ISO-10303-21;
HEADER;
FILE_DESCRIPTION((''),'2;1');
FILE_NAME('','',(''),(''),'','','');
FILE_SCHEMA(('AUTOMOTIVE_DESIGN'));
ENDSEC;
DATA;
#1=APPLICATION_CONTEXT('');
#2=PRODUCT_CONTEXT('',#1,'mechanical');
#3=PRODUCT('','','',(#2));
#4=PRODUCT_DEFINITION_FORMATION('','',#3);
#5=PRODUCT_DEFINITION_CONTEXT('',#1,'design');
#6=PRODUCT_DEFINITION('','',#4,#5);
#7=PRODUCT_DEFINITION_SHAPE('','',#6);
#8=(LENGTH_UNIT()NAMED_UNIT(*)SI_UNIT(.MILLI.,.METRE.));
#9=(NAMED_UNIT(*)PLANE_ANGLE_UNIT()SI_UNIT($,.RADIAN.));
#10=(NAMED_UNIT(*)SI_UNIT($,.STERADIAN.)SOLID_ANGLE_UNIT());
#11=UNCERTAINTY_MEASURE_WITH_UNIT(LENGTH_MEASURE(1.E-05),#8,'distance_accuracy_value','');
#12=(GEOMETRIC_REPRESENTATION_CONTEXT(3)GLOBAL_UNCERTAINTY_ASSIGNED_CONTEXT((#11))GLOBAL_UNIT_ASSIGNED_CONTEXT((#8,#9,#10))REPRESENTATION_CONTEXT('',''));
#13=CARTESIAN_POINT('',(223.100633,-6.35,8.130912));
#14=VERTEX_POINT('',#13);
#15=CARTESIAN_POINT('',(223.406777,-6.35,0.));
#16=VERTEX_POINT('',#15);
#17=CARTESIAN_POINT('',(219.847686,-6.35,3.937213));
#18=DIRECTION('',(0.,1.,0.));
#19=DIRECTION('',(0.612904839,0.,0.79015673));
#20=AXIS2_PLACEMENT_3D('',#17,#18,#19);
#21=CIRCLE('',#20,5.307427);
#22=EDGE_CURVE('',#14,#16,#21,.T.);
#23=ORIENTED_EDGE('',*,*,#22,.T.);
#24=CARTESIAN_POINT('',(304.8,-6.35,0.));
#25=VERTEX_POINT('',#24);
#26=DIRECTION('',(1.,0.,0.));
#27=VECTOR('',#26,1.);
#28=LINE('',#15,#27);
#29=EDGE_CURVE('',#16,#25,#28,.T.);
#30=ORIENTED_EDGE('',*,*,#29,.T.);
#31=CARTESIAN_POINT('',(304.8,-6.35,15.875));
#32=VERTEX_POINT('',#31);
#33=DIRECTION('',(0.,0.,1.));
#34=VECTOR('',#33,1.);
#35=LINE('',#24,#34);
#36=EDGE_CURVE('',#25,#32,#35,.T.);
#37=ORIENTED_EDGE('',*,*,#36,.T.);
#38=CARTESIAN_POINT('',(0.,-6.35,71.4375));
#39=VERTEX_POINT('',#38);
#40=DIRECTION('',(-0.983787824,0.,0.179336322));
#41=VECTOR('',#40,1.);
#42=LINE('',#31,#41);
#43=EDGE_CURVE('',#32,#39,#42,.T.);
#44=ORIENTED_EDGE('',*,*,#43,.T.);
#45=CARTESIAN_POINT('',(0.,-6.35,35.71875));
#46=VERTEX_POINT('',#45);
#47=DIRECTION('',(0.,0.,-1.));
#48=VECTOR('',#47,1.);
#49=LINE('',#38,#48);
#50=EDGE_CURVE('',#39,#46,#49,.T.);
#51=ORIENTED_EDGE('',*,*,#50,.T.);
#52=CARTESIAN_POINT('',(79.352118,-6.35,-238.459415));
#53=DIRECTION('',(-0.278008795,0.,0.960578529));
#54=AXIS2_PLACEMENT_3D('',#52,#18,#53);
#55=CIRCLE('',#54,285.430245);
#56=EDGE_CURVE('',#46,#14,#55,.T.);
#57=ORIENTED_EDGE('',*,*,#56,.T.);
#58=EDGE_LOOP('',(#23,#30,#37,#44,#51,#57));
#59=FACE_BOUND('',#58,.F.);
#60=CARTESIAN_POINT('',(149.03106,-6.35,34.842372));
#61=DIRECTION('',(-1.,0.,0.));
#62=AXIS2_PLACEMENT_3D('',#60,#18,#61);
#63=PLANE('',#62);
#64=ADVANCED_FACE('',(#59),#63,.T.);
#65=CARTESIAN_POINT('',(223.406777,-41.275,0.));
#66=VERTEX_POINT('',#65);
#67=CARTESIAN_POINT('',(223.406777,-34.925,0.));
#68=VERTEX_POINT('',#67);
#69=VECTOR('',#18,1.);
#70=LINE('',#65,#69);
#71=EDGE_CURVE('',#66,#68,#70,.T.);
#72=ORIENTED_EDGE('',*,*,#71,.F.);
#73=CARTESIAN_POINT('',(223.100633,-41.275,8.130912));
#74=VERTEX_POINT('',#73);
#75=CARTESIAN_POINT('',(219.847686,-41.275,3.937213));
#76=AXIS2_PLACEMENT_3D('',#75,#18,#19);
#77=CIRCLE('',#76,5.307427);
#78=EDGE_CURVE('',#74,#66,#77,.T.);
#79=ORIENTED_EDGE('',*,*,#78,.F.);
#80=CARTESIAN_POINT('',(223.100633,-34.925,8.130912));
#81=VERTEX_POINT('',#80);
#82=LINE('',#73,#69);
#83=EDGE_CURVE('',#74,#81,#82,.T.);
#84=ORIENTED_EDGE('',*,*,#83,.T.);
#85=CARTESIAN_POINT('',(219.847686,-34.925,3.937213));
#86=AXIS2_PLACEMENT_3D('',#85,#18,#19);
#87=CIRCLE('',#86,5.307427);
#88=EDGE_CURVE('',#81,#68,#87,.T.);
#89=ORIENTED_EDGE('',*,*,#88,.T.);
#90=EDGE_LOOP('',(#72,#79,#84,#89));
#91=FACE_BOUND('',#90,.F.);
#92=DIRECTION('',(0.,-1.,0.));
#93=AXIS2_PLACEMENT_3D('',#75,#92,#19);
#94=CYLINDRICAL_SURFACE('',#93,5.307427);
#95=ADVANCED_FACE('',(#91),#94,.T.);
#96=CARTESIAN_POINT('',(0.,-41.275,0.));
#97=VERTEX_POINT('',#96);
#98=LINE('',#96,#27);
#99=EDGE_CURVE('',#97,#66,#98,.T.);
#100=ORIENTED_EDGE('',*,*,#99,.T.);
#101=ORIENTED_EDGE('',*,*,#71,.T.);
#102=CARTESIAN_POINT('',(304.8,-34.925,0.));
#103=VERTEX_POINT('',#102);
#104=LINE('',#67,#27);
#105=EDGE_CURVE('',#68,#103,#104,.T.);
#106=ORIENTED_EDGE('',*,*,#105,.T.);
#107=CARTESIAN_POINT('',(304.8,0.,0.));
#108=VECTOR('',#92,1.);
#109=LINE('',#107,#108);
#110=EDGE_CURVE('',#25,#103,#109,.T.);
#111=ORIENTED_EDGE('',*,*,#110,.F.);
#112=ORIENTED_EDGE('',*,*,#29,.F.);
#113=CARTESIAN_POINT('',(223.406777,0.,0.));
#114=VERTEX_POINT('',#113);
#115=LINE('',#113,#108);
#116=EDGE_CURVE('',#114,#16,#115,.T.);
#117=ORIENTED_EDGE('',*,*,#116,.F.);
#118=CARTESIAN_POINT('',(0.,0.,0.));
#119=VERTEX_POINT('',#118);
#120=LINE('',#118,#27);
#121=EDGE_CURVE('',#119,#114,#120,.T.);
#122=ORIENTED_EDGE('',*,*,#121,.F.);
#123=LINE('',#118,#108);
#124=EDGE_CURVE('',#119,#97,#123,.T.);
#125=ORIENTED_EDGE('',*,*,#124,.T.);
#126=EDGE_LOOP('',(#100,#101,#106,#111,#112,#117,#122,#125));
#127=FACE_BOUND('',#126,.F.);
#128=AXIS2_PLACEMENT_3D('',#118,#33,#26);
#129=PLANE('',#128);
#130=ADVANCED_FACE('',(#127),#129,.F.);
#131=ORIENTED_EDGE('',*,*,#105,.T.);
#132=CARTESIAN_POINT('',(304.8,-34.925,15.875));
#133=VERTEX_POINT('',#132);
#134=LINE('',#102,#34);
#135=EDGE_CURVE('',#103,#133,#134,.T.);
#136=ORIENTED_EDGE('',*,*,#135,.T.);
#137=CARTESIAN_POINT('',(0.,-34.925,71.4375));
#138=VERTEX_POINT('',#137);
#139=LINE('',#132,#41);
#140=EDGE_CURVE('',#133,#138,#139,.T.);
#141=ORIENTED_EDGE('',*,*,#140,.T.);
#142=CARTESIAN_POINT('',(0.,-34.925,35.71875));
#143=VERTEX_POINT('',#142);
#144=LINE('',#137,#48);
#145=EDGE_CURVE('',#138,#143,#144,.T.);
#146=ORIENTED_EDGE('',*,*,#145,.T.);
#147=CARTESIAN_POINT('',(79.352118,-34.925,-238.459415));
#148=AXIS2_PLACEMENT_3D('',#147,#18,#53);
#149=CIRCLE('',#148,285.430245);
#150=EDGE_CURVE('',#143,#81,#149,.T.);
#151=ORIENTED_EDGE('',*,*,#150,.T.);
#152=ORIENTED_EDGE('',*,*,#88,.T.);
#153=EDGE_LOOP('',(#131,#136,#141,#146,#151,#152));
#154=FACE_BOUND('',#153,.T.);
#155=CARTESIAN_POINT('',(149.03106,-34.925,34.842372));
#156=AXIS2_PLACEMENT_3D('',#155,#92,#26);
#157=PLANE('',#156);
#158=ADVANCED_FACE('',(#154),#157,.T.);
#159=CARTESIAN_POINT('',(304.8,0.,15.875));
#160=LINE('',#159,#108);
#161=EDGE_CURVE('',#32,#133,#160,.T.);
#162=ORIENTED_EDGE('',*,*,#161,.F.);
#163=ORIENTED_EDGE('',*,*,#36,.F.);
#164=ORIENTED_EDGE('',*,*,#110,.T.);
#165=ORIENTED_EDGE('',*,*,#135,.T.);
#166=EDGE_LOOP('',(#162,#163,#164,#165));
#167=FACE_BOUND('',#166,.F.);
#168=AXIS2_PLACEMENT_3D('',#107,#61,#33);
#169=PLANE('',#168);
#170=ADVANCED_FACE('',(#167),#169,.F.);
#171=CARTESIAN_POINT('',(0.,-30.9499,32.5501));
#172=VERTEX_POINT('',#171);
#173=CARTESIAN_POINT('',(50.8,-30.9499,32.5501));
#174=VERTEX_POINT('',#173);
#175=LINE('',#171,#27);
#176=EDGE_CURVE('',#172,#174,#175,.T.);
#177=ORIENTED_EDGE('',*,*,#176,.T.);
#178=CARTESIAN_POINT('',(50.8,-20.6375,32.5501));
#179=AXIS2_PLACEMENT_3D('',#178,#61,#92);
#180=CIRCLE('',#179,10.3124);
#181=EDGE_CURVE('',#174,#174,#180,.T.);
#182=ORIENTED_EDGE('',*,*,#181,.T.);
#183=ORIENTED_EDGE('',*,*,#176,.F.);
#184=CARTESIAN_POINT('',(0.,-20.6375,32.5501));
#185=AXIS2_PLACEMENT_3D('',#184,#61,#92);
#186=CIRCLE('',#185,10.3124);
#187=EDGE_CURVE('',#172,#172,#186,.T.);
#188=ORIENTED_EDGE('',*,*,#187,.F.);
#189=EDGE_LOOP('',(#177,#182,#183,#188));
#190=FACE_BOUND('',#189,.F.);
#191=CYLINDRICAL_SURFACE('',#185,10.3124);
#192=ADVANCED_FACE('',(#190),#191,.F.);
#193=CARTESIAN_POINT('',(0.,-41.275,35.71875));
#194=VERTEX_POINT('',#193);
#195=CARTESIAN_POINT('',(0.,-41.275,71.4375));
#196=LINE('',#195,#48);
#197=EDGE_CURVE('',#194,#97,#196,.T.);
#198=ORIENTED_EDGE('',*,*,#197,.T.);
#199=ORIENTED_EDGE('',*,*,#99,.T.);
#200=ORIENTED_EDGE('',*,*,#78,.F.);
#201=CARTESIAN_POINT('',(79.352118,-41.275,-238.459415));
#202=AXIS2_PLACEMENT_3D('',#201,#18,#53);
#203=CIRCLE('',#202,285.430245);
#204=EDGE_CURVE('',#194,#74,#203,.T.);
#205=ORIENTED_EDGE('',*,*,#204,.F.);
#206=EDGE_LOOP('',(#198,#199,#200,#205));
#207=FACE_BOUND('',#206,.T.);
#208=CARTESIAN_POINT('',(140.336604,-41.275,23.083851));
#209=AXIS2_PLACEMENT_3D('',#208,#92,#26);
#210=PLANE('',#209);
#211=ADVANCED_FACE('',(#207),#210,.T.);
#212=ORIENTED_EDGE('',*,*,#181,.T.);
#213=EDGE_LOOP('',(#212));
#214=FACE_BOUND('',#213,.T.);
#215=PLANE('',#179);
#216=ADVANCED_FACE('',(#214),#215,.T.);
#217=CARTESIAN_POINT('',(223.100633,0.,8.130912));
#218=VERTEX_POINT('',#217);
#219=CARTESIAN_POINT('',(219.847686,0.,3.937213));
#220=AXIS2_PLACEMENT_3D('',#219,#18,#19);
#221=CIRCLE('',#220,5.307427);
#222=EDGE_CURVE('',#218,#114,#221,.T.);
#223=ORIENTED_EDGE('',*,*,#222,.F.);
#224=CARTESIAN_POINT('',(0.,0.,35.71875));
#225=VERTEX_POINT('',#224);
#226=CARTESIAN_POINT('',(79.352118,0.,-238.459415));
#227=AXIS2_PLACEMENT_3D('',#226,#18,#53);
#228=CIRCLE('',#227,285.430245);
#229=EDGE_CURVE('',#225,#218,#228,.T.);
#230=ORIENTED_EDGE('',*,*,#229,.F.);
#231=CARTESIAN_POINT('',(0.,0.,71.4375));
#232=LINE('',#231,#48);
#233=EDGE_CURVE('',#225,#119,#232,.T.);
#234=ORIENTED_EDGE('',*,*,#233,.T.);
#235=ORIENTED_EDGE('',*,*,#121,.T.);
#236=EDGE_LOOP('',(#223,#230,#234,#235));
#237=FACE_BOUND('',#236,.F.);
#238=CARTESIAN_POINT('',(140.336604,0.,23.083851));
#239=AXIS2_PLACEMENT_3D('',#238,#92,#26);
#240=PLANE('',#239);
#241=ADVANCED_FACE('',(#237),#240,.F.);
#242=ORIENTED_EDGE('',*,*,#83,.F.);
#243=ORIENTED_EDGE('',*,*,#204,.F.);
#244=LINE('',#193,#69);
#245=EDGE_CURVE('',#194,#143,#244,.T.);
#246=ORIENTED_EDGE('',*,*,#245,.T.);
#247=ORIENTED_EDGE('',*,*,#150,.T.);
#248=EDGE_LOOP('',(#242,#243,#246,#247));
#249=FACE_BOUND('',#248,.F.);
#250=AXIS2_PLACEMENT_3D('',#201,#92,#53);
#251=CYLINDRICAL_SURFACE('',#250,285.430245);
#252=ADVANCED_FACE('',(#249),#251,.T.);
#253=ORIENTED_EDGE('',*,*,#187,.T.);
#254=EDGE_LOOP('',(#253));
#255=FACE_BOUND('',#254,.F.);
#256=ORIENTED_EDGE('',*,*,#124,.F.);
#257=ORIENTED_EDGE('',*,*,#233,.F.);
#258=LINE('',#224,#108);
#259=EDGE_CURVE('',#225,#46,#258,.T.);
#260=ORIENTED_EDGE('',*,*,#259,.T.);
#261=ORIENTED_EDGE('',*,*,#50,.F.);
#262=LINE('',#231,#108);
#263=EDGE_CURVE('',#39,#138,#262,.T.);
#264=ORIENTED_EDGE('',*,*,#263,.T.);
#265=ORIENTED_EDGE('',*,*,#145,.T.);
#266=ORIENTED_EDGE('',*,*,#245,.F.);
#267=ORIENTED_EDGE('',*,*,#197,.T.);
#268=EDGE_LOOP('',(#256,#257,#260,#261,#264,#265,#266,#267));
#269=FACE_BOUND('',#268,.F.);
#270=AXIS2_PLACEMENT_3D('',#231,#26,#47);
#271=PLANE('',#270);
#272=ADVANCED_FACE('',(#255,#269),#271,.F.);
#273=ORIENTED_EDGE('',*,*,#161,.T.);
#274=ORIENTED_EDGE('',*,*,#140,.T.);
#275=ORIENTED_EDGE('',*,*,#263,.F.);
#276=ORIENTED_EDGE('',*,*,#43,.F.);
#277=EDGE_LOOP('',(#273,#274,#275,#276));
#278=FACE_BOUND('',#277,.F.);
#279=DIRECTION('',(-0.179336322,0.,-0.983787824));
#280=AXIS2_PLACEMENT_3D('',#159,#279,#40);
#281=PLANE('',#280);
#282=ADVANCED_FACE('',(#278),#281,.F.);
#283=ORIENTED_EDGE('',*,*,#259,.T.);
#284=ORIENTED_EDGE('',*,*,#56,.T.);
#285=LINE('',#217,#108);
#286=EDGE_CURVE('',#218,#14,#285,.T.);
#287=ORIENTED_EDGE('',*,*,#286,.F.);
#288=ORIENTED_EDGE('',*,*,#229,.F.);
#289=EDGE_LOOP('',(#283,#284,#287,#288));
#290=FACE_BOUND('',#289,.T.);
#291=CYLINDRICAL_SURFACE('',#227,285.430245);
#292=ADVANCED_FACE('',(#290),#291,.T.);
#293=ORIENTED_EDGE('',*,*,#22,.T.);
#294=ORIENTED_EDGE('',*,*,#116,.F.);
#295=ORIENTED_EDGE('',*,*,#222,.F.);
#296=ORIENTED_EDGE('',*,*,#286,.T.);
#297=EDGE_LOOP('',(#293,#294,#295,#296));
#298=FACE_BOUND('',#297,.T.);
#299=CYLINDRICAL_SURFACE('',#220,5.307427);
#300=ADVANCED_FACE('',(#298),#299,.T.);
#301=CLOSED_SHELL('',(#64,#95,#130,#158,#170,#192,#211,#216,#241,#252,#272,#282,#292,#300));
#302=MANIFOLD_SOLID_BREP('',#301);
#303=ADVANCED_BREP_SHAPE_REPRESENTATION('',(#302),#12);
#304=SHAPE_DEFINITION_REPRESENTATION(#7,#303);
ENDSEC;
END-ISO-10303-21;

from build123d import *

# Parameters (mm, degrees)
F1_DEPTH = 41.275
F2_R     = 10.3124
F3_DEPTH = 50.8
F5_DEPTH = 6.35


# Not quite as in the source:
# - a pattern or mirror of a feature is missing from the dataset's text; its kind, count and spacing are read off the source's solid


with BuildPart() as f1:
    # F0 (on Front) → F1 (new body)
    with BuildSketch(Plane.XZ):
        Polygon((0, 71.4375), (0, 0), (304.8, 0), (304.8, 15.875), align=None)
    extrude(amount=F1_DEPTH)

    # F2 (on face) → F3 (cut)
    with BuildSketch(Plane(origin=(0, 0, 0), x_dir=(0, -1, 0), z_dir=(-1, 0, 0))):
        with Locations((20.6375, 32.5501)):
            Circle(F2_R)
    extrude(amount=-F3_DEPTH, mode=Mode.SUBTRACT)

    # F4 (on face) → F5 (cut)
    with BuildSketch(Plane.XZ.offset(41.275)):
        with BuildLine():
            Line((0, 71.4375), (0, 35.71875))
            ThreePointArc((0, 35.71875), (114.380623494, 44.8132958518), (223.1006332012, 8.1309120088))
            ThreePointArc((223.1006332012, 8.1309120088), (225.1513542681, 4.1369059415), (223.4067767859, 0))
            Line((223.4067767859, 0), (304.8, 0))
            Line((304.8, 0), (304.8, 7.9375))
            Line((304.8, 7.9375), (304.8, 15.875))
            Line((304.8, 15.875), (0, 71.4375))
        make_face()
    f5 = extrude(amount=-F5_DEPTH, mode=Mode.SUBTRACT)

    # F5_copies: F5 across plane
    add(f5.mirror(Plane.ZX.offset(-20.6375)), mode=Mode.SUBTRACT)


solid = f1.part
